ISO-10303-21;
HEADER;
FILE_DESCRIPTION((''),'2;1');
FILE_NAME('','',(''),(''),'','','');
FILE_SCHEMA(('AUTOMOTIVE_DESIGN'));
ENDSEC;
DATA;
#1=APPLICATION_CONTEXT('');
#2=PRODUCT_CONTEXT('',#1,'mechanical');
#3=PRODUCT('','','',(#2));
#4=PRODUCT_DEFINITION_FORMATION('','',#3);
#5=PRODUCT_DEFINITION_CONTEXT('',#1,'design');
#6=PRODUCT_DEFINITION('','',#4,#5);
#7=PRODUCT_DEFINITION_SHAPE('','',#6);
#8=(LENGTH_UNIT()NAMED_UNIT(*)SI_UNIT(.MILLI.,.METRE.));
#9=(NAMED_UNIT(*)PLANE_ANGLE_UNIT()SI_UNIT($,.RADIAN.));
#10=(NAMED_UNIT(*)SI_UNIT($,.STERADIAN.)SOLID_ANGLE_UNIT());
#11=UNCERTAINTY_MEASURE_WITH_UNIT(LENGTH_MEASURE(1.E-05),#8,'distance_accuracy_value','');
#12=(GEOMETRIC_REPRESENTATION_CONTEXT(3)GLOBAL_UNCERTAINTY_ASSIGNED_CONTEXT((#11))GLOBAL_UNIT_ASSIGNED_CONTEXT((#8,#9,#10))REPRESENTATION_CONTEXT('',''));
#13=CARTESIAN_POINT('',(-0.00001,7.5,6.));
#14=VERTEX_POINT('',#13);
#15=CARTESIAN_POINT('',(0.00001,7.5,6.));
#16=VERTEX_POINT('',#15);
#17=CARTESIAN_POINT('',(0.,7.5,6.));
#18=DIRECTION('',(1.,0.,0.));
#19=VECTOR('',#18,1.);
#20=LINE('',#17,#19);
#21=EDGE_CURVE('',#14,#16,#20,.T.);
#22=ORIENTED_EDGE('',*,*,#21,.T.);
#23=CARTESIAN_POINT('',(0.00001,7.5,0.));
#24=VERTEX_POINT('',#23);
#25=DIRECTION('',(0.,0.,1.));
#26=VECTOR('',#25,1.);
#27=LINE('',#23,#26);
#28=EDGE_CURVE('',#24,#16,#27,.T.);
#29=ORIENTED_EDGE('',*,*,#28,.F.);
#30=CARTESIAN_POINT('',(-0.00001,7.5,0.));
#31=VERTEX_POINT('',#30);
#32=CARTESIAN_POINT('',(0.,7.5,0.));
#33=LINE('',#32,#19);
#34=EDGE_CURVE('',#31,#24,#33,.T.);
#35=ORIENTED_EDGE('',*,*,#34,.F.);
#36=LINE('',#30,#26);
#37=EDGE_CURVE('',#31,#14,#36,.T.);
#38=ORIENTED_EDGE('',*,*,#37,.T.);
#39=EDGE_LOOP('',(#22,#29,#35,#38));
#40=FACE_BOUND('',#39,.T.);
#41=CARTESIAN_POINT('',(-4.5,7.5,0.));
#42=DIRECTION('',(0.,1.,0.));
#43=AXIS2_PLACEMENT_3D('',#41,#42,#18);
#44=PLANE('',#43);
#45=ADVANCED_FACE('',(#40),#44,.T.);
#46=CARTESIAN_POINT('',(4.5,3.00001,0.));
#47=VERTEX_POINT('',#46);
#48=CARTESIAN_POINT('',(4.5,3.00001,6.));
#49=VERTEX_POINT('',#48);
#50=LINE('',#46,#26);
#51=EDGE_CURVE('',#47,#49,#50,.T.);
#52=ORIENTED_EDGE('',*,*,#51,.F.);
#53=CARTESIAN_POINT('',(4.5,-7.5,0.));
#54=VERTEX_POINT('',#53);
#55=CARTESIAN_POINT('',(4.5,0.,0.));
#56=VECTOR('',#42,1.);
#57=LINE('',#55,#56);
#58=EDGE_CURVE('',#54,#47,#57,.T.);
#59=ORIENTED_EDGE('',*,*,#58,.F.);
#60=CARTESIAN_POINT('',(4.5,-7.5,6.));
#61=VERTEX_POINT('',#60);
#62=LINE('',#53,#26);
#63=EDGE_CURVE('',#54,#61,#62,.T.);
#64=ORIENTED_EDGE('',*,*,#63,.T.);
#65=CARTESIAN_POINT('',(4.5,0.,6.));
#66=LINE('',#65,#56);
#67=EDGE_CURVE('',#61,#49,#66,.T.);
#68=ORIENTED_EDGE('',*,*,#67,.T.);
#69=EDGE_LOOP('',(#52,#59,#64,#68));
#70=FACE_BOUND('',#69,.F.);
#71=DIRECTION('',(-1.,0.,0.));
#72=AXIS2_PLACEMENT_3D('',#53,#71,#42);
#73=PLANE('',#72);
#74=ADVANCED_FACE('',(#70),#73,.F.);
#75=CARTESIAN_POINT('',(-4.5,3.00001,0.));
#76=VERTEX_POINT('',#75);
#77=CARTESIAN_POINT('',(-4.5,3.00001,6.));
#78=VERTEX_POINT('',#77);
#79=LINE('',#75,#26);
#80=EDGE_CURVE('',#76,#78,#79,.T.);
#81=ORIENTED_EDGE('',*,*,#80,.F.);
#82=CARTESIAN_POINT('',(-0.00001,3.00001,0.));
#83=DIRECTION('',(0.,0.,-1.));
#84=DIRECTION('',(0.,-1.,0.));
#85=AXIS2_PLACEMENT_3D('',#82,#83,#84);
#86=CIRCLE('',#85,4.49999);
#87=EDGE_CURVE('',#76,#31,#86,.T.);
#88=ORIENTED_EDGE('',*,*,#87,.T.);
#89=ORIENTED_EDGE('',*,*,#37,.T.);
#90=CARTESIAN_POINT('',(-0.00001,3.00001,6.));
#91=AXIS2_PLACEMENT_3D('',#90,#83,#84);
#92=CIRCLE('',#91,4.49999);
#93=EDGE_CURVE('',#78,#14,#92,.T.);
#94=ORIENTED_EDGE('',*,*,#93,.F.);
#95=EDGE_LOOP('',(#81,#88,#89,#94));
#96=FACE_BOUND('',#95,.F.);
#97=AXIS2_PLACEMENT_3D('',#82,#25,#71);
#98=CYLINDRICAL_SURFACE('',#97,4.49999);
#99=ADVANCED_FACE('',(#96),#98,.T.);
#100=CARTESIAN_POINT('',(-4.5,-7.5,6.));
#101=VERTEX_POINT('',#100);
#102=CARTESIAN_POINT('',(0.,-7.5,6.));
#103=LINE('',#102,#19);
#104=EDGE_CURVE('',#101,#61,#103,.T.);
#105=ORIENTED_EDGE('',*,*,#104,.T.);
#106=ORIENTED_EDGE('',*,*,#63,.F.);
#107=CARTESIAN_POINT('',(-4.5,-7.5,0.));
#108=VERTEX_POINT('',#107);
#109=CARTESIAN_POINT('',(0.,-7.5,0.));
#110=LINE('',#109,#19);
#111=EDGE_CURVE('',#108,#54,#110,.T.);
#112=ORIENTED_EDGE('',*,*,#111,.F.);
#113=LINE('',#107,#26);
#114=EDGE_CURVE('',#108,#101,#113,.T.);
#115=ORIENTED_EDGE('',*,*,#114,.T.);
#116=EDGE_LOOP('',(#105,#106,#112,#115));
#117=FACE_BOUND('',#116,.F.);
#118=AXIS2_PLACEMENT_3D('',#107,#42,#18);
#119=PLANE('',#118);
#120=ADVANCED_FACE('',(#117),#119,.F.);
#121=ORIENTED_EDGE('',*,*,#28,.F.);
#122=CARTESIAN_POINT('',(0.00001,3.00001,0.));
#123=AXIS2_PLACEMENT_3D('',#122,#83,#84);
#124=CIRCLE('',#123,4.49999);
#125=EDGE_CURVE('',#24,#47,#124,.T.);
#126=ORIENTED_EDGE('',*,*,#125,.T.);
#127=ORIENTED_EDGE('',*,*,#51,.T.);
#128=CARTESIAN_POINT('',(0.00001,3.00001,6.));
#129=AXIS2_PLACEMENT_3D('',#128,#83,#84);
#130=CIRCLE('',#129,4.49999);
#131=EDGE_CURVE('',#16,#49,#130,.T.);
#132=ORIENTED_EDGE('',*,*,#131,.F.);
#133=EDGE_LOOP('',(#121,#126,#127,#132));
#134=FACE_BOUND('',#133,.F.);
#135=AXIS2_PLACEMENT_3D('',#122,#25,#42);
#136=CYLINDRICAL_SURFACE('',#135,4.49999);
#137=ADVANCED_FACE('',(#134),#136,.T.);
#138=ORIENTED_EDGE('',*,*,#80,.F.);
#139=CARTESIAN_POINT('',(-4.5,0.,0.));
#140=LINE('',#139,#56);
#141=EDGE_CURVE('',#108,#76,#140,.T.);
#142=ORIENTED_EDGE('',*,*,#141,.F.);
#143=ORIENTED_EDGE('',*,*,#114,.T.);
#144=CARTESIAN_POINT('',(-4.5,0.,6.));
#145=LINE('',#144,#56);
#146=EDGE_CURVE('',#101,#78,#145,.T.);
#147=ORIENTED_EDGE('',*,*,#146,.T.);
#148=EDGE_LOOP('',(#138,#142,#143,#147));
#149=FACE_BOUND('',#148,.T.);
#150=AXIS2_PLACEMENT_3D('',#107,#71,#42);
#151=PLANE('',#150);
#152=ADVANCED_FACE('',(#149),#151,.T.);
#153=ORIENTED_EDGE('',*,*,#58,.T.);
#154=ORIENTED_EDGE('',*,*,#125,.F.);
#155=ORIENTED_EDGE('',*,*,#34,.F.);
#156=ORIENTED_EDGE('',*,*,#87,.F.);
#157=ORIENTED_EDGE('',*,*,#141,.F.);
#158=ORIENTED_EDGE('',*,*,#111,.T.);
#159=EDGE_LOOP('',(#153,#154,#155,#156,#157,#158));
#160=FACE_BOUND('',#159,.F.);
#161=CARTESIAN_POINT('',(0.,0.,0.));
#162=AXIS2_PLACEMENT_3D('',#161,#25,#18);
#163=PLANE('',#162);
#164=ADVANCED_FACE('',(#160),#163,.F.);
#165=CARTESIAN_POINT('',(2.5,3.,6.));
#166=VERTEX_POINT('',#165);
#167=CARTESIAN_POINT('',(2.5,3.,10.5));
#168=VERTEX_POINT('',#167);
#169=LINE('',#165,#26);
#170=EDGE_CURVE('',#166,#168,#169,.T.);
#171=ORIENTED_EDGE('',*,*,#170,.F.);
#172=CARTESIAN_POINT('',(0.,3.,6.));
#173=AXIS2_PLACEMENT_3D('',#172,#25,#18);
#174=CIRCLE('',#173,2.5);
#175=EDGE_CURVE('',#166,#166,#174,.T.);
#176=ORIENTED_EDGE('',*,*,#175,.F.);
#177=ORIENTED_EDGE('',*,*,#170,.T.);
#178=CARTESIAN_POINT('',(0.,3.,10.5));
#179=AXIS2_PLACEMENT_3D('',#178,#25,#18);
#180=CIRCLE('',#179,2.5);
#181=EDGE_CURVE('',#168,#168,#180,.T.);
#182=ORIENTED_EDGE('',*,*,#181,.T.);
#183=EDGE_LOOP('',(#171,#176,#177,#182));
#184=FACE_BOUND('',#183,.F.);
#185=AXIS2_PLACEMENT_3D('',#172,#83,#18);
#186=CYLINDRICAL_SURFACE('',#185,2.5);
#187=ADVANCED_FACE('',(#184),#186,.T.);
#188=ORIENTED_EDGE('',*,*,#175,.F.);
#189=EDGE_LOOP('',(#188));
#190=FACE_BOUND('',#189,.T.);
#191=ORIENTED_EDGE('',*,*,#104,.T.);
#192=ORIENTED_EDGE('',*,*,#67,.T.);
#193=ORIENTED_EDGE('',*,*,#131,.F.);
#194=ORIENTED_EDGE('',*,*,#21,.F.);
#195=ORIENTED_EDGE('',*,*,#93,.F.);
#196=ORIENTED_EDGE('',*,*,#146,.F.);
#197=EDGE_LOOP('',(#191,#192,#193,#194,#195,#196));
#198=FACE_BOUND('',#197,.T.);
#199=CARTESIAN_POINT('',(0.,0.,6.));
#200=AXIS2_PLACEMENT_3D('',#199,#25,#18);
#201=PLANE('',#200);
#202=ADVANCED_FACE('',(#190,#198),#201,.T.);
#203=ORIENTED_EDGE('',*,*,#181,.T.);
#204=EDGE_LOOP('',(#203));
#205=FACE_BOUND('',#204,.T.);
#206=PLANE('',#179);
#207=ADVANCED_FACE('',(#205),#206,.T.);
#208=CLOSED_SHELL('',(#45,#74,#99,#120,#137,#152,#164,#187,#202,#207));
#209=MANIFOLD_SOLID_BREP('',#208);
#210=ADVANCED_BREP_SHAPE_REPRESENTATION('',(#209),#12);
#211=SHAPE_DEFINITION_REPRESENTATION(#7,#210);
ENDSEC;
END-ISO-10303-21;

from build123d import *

# Parameters (mm, degrees)
F0_W     = 9
F0_H     = 15
F1_DEPTH = 6
F2_R     = 2.5
F3_DEPTH = 4.5
F4_R     = 4.49999


# Not quite as in the source:
# - a fillet or chamfer is up to 0.001 mm smaller than in the source, because OpenCascade refuses the exact size


with BuildPart() as f1:
    # F0 (on Top) → F1 (new body)
    with BuildSketch(Plane.XY):
        Rectangle(F0_W, F0_H)
    extrude(amount=F1_DEPTH)

    # F2 (on face) → F3 (join)
    with BuildSketch(Plane.XY.offset(6)):
        with Locations((0, 3)):
            Circle(F2_R)
    extrude(amount=F3_DEPTH)

    # F4 (radius 4.5 in the source; OpenCascade refuses exactly that, so slightly less here)
    f4_edges = [f1.edges().sort_by_distance(p)[0] for p in [
        (-4.5, 7.5, 3),
        (4.5, 7.5, 3),
    ]]
    fillet(f4_edges, radius=F4_R)


solid = f1.part
